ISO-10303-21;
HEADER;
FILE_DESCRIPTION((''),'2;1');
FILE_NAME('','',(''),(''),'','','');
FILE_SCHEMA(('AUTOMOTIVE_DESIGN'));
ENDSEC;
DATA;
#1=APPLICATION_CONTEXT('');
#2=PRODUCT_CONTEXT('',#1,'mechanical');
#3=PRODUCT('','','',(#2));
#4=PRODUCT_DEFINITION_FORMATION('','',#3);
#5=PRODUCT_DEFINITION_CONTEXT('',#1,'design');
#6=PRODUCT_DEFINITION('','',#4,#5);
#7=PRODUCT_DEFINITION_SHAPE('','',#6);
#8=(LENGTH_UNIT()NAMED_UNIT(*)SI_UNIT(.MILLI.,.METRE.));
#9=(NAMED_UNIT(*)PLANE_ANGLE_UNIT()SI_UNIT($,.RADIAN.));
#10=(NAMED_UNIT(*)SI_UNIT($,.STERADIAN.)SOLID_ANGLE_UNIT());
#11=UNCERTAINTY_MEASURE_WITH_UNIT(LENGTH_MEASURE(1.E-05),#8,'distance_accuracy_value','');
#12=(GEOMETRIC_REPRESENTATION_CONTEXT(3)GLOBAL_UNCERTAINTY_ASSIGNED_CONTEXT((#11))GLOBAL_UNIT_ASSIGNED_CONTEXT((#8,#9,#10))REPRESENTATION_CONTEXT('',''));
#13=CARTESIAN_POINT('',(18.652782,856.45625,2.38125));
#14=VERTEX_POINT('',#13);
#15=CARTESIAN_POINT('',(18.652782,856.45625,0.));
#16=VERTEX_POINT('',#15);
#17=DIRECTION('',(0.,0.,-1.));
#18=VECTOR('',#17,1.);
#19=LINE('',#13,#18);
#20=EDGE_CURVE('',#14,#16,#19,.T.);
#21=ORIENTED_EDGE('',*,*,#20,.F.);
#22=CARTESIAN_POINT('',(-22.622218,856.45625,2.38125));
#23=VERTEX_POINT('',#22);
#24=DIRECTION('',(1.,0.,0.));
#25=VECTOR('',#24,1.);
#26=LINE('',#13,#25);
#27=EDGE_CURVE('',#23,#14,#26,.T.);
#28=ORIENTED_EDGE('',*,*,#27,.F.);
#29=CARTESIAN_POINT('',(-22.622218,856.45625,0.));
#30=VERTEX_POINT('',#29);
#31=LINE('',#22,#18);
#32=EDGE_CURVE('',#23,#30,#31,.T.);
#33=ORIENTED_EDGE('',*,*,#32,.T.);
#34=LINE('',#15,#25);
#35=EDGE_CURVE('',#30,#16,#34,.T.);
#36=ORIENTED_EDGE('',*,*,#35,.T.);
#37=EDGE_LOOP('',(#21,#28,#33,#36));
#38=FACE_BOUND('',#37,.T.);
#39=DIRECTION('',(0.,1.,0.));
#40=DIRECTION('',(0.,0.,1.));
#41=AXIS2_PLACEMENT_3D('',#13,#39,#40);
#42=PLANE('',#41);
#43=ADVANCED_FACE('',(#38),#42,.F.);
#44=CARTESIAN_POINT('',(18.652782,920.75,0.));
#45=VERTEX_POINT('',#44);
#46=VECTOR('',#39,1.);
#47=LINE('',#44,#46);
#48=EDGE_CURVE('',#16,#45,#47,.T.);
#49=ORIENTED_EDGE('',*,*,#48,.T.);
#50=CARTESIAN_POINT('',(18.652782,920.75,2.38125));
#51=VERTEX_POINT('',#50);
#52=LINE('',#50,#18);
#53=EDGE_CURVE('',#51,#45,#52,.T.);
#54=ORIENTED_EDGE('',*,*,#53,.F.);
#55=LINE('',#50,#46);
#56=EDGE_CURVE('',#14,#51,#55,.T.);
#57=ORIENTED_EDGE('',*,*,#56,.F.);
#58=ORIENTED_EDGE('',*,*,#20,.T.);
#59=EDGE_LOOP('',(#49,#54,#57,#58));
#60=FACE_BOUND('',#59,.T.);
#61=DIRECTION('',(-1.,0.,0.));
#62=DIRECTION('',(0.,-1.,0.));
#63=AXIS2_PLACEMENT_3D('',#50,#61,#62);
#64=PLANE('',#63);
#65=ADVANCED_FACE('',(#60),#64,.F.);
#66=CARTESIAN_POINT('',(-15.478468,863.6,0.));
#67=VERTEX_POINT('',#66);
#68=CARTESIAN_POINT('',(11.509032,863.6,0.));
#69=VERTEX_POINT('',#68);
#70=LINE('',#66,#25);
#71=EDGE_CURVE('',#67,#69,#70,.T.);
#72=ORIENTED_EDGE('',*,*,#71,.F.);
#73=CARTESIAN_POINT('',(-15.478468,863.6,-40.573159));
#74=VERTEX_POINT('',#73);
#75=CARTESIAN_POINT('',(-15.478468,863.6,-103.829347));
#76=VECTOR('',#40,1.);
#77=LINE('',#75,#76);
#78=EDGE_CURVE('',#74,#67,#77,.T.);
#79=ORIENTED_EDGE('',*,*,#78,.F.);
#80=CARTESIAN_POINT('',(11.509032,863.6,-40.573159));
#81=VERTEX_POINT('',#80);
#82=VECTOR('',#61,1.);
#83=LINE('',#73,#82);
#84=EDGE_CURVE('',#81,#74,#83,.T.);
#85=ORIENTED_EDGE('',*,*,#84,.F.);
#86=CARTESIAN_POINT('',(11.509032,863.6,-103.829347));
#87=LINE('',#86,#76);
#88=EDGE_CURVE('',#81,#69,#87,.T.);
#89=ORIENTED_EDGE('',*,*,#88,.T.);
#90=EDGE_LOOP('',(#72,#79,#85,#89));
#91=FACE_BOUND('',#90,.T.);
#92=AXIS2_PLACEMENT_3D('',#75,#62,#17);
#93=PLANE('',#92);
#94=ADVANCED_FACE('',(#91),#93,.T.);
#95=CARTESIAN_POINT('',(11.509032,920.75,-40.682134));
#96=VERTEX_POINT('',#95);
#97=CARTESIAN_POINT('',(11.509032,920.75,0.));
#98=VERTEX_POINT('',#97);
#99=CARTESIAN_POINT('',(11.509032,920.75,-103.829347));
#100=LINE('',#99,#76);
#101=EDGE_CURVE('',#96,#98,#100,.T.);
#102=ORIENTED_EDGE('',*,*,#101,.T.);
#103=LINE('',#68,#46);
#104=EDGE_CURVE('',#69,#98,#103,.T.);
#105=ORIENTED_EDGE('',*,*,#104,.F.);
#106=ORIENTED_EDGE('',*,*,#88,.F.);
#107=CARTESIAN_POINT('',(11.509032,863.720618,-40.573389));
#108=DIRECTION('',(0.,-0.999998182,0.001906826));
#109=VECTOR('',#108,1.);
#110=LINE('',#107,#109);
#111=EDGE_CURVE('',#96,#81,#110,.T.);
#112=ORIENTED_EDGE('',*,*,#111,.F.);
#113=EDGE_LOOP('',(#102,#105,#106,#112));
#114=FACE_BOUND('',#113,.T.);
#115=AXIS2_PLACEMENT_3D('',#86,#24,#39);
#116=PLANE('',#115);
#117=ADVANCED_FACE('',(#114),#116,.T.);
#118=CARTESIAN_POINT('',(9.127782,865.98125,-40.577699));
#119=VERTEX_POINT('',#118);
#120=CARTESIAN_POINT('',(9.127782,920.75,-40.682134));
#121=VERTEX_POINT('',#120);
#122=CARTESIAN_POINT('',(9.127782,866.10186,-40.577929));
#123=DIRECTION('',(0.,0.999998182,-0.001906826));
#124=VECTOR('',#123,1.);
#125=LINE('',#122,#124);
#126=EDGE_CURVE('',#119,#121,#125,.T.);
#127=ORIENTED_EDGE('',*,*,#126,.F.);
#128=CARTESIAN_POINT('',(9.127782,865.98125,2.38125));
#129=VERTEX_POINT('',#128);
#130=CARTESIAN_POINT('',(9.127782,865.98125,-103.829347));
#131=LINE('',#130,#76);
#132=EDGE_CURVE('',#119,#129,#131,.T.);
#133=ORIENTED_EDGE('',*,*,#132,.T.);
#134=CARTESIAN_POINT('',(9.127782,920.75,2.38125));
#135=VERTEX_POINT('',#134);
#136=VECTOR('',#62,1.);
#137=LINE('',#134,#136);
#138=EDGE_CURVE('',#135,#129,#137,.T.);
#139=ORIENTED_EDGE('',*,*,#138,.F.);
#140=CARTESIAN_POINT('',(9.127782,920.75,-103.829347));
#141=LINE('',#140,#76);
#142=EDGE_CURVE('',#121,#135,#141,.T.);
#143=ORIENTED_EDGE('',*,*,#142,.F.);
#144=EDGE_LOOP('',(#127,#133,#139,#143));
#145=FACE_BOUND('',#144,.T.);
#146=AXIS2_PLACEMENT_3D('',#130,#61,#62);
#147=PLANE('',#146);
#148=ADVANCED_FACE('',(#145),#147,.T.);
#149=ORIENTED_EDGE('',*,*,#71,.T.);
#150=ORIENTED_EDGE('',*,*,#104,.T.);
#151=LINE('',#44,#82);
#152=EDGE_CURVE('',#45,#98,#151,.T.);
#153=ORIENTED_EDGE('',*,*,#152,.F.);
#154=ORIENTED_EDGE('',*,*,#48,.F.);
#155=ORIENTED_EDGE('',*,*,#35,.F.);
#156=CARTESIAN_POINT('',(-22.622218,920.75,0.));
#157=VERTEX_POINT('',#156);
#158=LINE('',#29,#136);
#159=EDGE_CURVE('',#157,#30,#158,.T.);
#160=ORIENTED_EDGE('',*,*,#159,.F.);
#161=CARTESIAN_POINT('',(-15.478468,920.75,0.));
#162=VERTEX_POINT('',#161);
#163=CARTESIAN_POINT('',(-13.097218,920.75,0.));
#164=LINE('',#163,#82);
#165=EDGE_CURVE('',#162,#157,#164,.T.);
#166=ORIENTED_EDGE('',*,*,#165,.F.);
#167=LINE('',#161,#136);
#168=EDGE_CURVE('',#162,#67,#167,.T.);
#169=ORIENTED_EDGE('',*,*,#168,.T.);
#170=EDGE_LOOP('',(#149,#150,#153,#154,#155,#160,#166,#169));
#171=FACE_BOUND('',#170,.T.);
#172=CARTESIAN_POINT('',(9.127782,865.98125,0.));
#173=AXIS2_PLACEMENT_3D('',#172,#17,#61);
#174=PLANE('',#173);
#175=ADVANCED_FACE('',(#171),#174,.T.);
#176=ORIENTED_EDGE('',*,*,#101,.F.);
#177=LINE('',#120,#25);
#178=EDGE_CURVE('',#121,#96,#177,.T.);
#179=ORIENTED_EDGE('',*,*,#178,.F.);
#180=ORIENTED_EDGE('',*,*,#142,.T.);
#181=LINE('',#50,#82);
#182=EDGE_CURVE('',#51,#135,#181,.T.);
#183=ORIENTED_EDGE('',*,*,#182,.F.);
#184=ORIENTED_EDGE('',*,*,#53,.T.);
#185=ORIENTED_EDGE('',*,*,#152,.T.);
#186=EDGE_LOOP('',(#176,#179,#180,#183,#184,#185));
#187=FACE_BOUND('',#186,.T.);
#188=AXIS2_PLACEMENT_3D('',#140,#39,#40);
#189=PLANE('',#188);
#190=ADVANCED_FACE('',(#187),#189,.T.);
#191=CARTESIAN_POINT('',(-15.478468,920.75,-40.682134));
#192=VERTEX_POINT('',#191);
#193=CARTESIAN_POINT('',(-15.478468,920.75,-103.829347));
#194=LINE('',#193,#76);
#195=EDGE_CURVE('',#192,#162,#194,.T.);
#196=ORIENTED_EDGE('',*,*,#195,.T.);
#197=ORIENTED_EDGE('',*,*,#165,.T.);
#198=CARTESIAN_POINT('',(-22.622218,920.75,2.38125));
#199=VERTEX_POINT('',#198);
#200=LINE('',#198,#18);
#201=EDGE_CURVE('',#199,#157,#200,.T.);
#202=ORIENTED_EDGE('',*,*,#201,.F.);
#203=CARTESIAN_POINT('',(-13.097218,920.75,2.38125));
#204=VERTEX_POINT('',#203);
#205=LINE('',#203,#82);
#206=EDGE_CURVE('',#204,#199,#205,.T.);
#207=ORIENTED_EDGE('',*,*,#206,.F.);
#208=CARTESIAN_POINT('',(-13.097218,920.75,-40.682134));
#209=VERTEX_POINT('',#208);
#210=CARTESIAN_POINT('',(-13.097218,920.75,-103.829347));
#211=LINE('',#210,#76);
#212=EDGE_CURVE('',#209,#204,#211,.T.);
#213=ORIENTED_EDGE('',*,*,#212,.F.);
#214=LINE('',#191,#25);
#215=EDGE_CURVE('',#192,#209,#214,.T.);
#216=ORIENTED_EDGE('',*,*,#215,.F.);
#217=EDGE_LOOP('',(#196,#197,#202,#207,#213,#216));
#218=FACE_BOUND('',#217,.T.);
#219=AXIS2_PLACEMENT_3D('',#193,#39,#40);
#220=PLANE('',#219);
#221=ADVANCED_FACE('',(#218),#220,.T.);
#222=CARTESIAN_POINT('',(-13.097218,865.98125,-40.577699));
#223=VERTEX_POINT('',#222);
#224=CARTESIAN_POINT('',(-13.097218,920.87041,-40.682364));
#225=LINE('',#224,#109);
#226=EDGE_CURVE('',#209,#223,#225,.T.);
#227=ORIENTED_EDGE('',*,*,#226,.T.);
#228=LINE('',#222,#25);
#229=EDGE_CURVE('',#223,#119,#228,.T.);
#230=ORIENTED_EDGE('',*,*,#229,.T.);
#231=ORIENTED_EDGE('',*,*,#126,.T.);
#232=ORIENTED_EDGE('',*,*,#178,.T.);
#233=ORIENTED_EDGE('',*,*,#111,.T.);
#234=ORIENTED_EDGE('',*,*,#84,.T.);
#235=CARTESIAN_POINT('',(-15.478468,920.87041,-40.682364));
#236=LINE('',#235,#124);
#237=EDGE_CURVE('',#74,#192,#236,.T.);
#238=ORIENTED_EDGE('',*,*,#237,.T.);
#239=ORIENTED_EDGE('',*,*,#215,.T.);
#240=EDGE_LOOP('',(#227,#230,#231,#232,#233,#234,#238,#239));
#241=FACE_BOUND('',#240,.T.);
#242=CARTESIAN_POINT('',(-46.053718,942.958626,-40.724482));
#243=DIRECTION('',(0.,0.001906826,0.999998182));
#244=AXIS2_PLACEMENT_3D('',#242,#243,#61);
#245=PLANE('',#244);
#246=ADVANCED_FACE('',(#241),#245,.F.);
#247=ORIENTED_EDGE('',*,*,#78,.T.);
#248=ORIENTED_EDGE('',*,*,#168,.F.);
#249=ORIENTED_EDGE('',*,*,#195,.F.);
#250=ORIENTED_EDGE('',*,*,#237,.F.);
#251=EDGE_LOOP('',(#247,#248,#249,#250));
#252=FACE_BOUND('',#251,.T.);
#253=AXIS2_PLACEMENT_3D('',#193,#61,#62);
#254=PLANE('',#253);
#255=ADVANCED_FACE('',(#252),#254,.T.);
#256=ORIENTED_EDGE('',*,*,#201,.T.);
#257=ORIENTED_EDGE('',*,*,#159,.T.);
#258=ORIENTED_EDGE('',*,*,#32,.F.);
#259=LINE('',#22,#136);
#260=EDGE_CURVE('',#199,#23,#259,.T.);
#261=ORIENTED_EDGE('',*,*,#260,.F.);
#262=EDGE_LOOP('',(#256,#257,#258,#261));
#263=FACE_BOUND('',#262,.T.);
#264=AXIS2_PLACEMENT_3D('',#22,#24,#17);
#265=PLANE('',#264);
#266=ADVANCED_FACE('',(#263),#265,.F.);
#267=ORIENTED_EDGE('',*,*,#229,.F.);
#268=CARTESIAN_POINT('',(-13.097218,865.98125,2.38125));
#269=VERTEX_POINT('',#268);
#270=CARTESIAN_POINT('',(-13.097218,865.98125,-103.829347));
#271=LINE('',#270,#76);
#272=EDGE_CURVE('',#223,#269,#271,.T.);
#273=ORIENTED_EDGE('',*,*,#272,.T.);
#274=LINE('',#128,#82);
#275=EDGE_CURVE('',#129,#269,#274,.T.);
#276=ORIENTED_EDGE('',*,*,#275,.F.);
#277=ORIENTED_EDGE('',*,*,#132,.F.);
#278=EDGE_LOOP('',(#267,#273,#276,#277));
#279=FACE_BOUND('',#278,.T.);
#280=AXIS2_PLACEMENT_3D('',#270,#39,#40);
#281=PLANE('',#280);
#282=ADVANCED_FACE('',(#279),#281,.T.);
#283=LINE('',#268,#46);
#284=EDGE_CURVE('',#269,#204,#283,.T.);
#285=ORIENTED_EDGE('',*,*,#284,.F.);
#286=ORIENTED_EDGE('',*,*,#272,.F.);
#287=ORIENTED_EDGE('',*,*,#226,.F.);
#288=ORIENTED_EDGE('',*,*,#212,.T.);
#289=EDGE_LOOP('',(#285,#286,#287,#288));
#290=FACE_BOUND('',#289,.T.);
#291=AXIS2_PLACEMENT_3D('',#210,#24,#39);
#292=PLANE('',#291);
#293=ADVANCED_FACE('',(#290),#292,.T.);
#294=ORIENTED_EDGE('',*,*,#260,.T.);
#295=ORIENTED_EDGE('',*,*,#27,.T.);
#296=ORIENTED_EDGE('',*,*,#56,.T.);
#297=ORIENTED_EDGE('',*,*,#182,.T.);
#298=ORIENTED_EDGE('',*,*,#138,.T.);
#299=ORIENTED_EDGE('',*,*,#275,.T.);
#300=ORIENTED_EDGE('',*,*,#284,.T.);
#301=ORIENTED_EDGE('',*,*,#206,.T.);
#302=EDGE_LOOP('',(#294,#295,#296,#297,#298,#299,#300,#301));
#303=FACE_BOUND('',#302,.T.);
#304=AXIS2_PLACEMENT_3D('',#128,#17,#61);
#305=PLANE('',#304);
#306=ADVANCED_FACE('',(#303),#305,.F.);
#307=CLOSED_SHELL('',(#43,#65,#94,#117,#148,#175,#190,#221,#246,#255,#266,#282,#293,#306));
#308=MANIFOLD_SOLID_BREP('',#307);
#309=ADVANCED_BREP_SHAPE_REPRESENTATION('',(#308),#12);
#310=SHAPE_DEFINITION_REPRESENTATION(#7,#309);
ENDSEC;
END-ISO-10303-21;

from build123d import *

# Parameters (mm, degrees)
EXTRUDE1_START   = -15.478468141
EXTRUDE1_DEPTH   = 2.38125
EXTRUDE1_START_2 = 9.127781859
EXTRUDE1_2_DEPTH = 2.38125
EXTRUDE1_START_3 = -13.097218141
EXTRUDE1_3_DEPTH = 22.225
EXTRUDE2_DEPTH   = 2.38125


# Read off the part's stored shape, not the designer's step: Extrude1
with BuildPart() as part:
    # Extrude1 outline → Extrude1 (new body)
    with BuildSketch(Plane.YZ.offset(EXTRUDE1_START)):
        Polygon((863.6, 0), (863.6, -40.573158736), (920.75, -40.682134014), (920.75, 0), align=None)
    extrude(amount=EXTRUDE1_DEPTH)



with BuildPart() as body_2:
    # Extrude1 2 outline → Extrude1 2 (new body)
    with BuildSketch(Plane.YZ.offset(EXTRUDE1_START_2)):
        Polygon((863.6, 0), (863.6, -40.573158736), (920.75, -40.682134014), (920.75, 0), align=None)
    extrude(amount=EXTRUDE1_2_DEPTH)


with BuildPart() as part_1:
    add(part.part)

    add(body_2.part)  # Extrude1 3 merges body 2
    # Extrude1 3 outline → Extrude1 3 (add)
    with BuildSketch(Plane.YZ.offset(EXTRUDE1_START_3)):
        Polygon((865.98125, 0), (863.6, 0), (863.6, -40.573158736), (865.98125, -40.577699373), align=None)
    extrude(amount=EXTRUDE1_3_DEPTH)

    # Sketch2 → Extrude2 (add)
    with BuildSketch(Plane.XY):
        Polygon((18.652781859, 920.75), (9.127781859, 920.75), (9.127781859, 865.98125), (-13.097218141, 865.98125), (-13.097218141, 920.75), (-22.622218141, 920.75), (-22.622218141, 856.45625), (18.652781859, 856.45625), align=None)
    extrude(amount=EXTRUDE2_DEPTH)


solid = part_1.part
